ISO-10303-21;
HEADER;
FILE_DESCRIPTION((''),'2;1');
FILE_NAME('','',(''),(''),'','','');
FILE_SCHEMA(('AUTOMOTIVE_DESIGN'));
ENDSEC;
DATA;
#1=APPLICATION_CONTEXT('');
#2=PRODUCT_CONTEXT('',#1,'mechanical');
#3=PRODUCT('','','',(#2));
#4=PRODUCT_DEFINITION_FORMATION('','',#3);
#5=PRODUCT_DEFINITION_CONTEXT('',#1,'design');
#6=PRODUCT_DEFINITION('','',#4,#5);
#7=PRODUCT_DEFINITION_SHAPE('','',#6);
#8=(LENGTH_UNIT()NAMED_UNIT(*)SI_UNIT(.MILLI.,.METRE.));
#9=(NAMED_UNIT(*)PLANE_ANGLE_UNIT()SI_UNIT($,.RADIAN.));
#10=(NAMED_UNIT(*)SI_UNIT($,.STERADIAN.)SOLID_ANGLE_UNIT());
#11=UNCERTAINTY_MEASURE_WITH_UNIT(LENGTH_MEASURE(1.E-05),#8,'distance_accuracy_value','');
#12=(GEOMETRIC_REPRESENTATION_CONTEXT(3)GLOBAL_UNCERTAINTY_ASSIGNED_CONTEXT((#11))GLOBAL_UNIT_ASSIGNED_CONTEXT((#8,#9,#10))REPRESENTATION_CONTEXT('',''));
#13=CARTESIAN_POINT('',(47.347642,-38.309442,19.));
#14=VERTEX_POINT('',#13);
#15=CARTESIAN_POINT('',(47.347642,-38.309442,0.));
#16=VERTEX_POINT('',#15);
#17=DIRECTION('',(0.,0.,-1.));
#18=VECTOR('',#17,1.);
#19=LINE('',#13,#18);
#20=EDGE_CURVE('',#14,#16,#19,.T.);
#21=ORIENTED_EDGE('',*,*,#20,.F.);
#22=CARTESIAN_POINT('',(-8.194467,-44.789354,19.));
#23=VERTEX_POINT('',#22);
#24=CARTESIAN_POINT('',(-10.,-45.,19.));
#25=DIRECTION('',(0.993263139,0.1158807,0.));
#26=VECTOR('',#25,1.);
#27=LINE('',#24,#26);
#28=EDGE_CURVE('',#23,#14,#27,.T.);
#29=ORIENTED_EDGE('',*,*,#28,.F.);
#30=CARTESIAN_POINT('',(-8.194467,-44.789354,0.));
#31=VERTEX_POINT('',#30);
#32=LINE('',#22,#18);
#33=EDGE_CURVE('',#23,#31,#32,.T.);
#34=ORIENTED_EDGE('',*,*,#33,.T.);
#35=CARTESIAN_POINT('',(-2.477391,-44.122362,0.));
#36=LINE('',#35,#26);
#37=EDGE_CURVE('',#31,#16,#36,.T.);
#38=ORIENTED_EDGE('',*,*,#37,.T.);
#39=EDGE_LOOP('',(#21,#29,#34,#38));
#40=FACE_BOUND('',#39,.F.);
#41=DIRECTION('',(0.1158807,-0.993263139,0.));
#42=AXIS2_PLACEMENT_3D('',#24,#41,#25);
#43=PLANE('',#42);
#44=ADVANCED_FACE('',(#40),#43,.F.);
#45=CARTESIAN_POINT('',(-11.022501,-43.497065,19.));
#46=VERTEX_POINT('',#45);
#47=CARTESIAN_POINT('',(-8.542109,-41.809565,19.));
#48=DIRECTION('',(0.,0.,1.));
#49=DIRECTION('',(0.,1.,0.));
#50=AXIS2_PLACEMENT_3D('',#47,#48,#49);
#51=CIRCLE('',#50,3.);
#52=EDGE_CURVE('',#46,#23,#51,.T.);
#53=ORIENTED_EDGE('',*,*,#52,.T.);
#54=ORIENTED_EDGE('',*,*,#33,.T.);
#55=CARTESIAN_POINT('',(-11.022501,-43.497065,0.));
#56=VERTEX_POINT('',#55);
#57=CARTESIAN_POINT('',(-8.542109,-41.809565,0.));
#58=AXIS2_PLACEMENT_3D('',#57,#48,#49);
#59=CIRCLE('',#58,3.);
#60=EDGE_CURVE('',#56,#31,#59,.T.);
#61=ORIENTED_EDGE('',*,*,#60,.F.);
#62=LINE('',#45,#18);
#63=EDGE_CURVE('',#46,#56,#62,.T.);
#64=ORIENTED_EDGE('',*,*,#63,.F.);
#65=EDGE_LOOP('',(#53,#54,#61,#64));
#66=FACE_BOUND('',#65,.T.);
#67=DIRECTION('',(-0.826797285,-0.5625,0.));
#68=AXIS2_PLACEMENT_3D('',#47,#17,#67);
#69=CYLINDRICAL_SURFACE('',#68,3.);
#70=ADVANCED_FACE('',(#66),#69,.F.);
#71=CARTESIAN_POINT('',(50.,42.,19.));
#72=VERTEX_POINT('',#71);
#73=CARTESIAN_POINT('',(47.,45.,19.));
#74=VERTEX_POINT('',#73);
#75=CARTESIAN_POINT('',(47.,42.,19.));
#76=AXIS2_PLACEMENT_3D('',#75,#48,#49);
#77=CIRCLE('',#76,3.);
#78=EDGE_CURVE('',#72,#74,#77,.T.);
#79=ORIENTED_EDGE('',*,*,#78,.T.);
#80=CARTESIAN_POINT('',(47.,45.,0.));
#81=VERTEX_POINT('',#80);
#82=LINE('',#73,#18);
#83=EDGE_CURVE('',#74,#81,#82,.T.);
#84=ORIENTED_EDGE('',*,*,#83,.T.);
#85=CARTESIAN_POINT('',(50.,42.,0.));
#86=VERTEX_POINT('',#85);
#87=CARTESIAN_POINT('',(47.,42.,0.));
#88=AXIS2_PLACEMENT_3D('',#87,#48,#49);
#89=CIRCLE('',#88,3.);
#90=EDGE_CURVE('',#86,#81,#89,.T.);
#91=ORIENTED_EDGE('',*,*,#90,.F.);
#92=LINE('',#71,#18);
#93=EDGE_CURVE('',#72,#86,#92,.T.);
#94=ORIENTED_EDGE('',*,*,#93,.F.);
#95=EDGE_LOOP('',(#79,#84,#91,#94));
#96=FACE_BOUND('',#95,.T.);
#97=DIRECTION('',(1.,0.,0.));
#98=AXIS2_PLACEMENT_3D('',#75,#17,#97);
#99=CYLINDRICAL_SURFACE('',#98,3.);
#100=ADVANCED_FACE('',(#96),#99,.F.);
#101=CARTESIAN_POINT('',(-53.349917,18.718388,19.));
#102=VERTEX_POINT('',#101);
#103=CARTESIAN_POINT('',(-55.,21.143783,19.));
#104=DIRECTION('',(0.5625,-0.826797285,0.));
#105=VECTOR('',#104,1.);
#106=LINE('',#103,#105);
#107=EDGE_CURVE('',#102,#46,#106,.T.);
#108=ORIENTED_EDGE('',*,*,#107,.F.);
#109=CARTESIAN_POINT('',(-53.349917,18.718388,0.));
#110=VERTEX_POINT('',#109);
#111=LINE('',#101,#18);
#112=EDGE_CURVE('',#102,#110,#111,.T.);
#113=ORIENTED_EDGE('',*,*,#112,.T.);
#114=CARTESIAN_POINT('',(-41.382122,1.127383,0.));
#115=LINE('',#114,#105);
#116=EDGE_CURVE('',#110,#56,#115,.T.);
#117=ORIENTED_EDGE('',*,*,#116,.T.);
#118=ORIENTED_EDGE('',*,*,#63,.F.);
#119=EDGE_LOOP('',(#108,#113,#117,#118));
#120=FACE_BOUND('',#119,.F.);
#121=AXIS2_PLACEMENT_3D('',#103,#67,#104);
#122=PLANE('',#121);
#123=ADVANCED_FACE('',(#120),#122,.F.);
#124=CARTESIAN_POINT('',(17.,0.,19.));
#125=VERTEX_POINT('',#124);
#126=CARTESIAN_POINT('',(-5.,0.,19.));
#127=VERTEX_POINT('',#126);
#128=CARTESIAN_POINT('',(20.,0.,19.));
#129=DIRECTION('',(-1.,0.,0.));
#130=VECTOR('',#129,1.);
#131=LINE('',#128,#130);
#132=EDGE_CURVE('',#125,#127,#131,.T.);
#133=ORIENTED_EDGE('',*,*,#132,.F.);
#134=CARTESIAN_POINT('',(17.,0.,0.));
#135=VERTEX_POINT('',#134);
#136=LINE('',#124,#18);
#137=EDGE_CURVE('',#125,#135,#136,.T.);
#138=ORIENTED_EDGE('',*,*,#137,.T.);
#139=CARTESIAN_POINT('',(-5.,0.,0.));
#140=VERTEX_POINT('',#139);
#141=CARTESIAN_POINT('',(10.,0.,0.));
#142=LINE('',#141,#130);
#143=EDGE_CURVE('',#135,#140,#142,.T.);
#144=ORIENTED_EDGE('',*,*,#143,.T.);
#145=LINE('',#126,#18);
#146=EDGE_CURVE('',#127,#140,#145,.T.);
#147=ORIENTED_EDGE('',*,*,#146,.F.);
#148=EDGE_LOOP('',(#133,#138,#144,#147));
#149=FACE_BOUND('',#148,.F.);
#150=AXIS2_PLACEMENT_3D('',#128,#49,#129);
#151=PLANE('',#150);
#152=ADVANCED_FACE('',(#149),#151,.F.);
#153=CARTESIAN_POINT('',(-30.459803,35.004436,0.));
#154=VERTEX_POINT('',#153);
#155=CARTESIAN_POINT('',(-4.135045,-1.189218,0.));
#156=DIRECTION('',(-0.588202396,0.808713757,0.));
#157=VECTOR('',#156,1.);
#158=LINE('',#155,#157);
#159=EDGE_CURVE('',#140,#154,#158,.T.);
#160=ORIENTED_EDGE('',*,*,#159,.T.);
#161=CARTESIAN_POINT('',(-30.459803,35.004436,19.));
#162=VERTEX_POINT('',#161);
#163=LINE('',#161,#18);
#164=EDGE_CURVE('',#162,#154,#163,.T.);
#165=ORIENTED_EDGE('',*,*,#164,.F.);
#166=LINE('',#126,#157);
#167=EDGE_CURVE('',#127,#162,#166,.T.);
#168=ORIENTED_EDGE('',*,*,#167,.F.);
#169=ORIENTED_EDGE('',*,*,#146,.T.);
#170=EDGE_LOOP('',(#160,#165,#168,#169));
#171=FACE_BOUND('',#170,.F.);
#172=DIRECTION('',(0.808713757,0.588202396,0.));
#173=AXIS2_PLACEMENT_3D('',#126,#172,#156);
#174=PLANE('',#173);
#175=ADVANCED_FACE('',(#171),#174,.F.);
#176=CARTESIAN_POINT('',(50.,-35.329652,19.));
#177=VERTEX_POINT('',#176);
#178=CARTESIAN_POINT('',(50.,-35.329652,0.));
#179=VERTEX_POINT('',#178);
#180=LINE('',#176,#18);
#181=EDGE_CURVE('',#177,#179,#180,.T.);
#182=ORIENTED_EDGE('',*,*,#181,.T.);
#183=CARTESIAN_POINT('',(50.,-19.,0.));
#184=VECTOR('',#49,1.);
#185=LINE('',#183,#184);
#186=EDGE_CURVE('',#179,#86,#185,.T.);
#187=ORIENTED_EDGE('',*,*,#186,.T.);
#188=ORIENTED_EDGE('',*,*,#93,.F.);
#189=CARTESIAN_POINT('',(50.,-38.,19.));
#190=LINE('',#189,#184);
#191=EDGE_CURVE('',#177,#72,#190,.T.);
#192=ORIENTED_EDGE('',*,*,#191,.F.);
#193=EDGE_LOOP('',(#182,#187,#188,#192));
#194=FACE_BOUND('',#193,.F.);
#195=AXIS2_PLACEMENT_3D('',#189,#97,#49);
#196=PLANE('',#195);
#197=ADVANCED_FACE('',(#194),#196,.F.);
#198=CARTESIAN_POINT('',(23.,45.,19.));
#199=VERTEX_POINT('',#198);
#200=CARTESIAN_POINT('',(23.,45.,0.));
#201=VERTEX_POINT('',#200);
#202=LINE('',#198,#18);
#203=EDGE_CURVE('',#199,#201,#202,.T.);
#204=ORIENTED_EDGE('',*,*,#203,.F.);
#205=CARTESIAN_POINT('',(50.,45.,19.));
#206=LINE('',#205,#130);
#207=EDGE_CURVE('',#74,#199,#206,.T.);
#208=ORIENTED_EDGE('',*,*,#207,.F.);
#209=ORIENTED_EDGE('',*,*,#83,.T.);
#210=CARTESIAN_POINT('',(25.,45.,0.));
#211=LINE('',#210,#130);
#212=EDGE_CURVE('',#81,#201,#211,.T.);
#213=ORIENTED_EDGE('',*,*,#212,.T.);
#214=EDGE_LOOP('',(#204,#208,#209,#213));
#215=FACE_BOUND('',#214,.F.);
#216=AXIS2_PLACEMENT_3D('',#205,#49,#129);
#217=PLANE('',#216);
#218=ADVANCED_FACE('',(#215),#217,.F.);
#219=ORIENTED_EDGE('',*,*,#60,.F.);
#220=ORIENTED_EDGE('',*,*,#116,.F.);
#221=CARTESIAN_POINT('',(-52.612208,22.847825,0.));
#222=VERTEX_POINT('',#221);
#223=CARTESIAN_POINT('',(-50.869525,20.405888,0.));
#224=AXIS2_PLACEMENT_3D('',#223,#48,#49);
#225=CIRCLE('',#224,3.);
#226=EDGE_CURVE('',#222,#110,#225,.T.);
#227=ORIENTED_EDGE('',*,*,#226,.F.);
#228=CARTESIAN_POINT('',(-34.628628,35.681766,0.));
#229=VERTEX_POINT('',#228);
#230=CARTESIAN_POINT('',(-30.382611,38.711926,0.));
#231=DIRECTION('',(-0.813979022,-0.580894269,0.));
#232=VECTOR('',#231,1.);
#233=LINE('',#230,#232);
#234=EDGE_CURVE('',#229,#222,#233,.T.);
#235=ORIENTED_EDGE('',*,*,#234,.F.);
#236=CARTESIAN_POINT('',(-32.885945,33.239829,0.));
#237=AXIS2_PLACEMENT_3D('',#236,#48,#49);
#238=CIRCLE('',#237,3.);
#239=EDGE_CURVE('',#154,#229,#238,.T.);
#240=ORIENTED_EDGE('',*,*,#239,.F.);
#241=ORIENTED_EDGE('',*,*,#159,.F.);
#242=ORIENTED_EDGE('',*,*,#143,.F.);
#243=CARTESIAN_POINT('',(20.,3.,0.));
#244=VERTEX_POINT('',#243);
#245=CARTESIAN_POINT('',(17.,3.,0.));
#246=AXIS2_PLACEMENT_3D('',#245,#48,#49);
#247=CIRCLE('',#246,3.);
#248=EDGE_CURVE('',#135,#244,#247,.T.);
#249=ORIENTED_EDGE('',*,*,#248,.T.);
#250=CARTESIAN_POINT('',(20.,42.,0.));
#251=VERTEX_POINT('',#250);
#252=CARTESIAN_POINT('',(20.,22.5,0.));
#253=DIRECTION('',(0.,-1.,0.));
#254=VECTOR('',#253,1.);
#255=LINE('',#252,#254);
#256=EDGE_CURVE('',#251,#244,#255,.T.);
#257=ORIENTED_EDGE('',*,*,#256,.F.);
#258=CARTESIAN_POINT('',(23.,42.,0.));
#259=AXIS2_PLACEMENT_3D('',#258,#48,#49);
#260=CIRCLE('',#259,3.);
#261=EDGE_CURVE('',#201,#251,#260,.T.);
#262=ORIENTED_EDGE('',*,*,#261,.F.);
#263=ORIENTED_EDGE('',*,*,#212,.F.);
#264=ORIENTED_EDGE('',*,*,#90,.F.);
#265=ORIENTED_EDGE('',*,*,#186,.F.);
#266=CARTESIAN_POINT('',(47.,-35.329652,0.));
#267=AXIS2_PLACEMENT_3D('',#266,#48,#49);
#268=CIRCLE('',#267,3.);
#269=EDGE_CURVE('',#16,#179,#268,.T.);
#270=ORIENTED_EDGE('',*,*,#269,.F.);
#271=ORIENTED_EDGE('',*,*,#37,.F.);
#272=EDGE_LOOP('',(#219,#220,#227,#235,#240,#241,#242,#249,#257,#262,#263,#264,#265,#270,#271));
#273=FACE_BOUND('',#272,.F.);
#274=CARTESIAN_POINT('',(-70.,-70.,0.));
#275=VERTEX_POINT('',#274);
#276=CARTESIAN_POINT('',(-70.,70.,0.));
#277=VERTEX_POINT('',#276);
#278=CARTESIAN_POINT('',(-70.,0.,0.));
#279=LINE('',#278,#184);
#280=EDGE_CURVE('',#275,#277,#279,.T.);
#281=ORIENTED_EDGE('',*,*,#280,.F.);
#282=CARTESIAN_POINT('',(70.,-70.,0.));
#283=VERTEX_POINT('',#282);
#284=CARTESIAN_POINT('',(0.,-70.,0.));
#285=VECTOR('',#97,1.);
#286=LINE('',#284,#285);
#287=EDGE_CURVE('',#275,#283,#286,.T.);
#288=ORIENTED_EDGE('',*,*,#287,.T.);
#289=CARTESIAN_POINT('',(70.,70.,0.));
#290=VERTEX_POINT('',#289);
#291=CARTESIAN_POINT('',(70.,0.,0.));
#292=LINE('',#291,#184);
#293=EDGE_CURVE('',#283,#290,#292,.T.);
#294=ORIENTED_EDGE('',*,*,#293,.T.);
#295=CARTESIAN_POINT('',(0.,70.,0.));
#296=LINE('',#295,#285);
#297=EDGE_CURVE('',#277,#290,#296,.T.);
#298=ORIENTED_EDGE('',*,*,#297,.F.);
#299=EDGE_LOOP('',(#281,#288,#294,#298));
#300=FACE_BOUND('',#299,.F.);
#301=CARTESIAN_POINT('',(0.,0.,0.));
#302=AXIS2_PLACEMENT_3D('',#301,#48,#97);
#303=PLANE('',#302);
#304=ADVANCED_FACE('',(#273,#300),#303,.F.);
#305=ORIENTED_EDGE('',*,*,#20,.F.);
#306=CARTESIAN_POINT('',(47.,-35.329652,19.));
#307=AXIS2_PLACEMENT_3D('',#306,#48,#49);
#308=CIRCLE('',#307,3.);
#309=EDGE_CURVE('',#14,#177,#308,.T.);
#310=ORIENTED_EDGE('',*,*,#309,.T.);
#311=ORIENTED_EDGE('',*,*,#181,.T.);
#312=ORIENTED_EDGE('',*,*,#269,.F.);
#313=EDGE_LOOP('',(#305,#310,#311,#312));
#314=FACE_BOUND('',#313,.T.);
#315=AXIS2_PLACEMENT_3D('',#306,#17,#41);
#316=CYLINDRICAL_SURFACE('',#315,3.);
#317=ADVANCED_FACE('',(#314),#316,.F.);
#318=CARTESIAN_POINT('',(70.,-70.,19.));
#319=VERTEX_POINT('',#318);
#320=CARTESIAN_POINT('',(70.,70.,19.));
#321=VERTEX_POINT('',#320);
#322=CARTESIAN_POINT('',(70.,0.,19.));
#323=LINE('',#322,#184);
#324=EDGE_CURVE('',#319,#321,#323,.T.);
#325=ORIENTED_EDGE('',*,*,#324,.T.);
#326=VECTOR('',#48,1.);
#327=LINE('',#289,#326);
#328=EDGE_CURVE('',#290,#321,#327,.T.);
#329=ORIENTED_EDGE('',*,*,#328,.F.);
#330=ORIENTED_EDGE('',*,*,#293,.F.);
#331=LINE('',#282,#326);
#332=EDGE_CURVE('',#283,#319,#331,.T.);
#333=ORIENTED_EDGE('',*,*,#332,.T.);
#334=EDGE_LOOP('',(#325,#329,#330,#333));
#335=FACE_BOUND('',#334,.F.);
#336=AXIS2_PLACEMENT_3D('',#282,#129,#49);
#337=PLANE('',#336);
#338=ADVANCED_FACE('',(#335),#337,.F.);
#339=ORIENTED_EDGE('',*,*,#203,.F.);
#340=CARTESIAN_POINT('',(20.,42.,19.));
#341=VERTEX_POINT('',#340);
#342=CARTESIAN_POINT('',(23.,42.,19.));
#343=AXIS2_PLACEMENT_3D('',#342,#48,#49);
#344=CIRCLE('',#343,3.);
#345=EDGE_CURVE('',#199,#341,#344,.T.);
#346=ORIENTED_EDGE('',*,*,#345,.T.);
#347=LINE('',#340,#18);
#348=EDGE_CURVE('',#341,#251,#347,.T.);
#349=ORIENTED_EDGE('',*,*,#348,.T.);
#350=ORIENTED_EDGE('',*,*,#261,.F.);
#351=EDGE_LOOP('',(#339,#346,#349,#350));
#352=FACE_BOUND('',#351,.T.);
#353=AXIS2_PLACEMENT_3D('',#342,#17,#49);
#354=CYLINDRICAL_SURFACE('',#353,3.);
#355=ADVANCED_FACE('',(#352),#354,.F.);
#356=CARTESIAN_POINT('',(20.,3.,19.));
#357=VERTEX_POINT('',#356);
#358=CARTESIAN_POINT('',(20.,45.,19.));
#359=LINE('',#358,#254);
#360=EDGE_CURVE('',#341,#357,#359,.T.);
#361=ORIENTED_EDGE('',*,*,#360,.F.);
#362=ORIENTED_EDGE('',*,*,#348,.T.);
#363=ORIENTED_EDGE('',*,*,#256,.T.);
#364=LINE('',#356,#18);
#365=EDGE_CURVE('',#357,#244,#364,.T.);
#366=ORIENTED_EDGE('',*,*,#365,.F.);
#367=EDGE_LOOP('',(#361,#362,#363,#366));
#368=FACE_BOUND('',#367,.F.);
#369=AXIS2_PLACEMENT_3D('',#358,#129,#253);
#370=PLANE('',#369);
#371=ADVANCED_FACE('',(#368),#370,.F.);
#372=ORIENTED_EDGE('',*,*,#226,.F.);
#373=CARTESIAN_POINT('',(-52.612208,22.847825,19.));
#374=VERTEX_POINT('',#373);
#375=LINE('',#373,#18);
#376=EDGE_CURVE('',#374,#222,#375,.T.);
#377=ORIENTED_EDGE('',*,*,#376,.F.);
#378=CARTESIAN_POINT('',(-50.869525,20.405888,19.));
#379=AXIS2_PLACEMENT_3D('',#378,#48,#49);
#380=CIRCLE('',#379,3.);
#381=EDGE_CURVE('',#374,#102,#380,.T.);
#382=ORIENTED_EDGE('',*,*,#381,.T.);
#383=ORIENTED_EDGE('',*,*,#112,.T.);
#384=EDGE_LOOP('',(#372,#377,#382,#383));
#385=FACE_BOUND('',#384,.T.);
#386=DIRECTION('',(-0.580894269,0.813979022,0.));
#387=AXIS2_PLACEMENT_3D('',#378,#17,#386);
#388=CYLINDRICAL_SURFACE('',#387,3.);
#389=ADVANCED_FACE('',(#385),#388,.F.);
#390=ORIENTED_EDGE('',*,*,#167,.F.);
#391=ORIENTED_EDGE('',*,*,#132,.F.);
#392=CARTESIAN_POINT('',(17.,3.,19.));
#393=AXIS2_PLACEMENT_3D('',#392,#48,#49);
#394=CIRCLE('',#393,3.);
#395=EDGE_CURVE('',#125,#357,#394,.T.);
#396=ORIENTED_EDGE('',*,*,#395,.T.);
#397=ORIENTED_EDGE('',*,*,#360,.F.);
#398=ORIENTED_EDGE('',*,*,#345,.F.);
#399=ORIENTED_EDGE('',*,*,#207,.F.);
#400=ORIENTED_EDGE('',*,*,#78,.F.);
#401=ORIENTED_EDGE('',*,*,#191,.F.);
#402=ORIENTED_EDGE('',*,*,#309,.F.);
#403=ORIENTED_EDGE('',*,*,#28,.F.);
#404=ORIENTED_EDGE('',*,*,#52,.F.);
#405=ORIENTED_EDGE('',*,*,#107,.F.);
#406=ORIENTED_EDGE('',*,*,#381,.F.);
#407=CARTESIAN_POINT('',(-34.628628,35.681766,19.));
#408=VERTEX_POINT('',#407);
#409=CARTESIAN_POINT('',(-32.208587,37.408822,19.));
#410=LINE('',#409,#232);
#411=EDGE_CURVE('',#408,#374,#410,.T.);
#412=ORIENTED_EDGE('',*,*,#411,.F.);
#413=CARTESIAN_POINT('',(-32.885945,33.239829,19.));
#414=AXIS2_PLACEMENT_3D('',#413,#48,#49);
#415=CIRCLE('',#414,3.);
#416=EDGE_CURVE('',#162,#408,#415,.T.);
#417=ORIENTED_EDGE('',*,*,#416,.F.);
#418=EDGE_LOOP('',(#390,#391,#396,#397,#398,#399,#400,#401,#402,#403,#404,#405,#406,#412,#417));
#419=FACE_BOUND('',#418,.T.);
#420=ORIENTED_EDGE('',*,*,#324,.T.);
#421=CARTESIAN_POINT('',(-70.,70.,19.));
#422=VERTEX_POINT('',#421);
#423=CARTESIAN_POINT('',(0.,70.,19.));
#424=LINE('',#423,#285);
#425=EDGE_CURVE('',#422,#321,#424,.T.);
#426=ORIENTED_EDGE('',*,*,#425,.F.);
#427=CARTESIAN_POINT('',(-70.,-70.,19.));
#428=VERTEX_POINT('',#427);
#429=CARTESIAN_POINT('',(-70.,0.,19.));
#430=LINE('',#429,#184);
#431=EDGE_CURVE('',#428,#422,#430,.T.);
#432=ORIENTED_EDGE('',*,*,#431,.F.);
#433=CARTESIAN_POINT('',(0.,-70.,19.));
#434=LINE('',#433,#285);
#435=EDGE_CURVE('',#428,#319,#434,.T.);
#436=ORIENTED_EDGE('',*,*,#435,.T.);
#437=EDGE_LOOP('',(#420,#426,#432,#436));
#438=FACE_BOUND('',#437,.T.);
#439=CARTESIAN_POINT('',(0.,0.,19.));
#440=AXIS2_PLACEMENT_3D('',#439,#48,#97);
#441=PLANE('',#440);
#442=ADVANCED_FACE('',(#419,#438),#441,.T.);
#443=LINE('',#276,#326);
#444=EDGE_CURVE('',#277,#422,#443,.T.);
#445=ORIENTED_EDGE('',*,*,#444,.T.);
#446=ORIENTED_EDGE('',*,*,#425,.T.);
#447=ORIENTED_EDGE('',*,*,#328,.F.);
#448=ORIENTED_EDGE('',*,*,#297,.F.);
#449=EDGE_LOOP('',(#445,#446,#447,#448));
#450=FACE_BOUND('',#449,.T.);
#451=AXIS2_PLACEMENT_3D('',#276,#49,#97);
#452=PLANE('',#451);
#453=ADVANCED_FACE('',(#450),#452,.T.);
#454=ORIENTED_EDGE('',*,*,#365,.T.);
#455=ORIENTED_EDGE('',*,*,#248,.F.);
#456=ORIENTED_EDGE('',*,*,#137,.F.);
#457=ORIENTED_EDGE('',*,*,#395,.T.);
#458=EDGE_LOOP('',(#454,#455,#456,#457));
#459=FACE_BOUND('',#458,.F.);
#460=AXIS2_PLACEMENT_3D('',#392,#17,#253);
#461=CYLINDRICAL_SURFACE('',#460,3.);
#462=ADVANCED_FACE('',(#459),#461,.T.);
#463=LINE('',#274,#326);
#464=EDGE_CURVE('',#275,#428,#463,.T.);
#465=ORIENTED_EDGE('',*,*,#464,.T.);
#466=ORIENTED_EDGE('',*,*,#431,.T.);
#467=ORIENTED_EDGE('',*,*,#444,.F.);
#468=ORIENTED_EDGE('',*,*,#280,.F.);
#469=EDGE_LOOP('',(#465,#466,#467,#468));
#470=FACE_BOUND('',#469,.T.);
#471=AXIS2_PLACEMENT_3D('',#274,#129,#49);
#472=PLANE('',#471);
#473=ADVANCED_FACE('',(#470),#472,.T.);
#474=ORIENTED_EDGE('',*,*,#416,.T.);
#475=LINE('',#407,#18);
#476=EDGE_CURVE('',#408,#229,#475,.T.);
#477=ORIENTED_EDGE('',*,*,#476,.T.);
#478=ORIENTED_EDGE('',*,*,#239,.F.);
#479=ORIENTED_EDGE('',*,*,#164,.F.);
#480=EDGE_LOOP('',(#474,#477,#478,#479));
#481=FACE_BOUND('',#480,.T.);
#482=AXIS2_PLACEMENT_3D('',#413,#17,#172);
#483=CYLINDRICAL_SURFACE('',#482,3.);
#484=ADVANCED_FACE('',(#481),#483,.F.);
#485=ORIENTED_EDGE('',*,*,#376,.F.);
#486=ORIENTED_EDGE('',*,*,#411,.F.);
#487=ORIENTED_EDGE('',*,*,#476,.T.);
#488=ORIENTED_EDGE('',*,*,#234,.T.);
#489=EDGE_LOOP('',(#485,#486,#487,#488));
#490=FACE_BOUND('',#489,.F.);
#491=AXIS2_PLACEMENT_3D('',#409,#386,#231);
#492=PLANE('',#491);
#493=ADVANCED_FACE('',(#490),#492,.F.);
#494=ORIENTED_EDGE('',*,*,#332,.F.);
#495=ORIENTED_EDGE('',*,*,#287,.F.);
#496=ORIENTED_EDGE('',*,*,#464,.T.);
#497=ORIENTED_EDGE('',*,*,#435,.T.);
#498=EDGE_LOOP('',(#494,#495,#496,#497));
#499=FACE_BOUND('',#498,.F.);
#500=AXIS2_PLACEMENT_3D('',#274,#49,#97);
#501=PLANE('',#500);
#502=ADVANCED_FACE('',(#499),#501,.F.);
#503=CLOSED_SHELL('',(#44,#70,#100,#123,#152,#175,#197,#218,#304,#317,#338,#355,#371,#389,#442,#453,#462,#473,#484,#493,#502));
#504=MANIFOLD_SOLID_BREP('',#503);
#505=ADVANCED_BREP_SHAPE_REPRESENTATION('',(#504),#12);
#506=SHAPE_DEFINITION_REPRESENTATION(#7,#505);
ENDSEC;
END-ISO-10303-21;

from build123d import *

# Parameters (mm, degrees)
F0_W     = 140
F0_H     = 140
F1_DEPTH = 19
F3_DEPTH = 20
F4_R     = 3


# Not quite as in the source:
# - a feature names something its author has since deleted; it is built from what else it names


with BuildPart() as f1:
    # F0 (on Top) → F1 (new body)
    with BuildSketch(Plane.XY):
        Rectangle(F0_W, F0_H)
    extrude(amount=F1_DEPTH)

    # F2 (on face) → F3 (cut)
    with BuildSketch(Plane.XY.offset(19)):
        Polygon((20, 0), (0, 0), (-5, 0), (-32.2085873907, 37.4088223177), (-55, 21.1437827766), (-10, -45), (50, -38), (50, 45), (20, 45), align=None)
    extrude(amount=-F3_DEPTH, mode=Mode.SUBTRACT)

    # F4
    f4_edges = [f1.edges().sort_by_distance(p)[0] for p in [
        (50, -38, 9.5),
        (50, 45, 9.5),
        (20, 45, 9.5),
        (20, 0, 9.5),
        (-55, 21.143783, 9.5),
        (-10, -45, 9.5),
        (-32.208587, 37.408822, 9.5),
    ]]
    fillet(f4_edges, radius=F4_R)


solid = f1.part
